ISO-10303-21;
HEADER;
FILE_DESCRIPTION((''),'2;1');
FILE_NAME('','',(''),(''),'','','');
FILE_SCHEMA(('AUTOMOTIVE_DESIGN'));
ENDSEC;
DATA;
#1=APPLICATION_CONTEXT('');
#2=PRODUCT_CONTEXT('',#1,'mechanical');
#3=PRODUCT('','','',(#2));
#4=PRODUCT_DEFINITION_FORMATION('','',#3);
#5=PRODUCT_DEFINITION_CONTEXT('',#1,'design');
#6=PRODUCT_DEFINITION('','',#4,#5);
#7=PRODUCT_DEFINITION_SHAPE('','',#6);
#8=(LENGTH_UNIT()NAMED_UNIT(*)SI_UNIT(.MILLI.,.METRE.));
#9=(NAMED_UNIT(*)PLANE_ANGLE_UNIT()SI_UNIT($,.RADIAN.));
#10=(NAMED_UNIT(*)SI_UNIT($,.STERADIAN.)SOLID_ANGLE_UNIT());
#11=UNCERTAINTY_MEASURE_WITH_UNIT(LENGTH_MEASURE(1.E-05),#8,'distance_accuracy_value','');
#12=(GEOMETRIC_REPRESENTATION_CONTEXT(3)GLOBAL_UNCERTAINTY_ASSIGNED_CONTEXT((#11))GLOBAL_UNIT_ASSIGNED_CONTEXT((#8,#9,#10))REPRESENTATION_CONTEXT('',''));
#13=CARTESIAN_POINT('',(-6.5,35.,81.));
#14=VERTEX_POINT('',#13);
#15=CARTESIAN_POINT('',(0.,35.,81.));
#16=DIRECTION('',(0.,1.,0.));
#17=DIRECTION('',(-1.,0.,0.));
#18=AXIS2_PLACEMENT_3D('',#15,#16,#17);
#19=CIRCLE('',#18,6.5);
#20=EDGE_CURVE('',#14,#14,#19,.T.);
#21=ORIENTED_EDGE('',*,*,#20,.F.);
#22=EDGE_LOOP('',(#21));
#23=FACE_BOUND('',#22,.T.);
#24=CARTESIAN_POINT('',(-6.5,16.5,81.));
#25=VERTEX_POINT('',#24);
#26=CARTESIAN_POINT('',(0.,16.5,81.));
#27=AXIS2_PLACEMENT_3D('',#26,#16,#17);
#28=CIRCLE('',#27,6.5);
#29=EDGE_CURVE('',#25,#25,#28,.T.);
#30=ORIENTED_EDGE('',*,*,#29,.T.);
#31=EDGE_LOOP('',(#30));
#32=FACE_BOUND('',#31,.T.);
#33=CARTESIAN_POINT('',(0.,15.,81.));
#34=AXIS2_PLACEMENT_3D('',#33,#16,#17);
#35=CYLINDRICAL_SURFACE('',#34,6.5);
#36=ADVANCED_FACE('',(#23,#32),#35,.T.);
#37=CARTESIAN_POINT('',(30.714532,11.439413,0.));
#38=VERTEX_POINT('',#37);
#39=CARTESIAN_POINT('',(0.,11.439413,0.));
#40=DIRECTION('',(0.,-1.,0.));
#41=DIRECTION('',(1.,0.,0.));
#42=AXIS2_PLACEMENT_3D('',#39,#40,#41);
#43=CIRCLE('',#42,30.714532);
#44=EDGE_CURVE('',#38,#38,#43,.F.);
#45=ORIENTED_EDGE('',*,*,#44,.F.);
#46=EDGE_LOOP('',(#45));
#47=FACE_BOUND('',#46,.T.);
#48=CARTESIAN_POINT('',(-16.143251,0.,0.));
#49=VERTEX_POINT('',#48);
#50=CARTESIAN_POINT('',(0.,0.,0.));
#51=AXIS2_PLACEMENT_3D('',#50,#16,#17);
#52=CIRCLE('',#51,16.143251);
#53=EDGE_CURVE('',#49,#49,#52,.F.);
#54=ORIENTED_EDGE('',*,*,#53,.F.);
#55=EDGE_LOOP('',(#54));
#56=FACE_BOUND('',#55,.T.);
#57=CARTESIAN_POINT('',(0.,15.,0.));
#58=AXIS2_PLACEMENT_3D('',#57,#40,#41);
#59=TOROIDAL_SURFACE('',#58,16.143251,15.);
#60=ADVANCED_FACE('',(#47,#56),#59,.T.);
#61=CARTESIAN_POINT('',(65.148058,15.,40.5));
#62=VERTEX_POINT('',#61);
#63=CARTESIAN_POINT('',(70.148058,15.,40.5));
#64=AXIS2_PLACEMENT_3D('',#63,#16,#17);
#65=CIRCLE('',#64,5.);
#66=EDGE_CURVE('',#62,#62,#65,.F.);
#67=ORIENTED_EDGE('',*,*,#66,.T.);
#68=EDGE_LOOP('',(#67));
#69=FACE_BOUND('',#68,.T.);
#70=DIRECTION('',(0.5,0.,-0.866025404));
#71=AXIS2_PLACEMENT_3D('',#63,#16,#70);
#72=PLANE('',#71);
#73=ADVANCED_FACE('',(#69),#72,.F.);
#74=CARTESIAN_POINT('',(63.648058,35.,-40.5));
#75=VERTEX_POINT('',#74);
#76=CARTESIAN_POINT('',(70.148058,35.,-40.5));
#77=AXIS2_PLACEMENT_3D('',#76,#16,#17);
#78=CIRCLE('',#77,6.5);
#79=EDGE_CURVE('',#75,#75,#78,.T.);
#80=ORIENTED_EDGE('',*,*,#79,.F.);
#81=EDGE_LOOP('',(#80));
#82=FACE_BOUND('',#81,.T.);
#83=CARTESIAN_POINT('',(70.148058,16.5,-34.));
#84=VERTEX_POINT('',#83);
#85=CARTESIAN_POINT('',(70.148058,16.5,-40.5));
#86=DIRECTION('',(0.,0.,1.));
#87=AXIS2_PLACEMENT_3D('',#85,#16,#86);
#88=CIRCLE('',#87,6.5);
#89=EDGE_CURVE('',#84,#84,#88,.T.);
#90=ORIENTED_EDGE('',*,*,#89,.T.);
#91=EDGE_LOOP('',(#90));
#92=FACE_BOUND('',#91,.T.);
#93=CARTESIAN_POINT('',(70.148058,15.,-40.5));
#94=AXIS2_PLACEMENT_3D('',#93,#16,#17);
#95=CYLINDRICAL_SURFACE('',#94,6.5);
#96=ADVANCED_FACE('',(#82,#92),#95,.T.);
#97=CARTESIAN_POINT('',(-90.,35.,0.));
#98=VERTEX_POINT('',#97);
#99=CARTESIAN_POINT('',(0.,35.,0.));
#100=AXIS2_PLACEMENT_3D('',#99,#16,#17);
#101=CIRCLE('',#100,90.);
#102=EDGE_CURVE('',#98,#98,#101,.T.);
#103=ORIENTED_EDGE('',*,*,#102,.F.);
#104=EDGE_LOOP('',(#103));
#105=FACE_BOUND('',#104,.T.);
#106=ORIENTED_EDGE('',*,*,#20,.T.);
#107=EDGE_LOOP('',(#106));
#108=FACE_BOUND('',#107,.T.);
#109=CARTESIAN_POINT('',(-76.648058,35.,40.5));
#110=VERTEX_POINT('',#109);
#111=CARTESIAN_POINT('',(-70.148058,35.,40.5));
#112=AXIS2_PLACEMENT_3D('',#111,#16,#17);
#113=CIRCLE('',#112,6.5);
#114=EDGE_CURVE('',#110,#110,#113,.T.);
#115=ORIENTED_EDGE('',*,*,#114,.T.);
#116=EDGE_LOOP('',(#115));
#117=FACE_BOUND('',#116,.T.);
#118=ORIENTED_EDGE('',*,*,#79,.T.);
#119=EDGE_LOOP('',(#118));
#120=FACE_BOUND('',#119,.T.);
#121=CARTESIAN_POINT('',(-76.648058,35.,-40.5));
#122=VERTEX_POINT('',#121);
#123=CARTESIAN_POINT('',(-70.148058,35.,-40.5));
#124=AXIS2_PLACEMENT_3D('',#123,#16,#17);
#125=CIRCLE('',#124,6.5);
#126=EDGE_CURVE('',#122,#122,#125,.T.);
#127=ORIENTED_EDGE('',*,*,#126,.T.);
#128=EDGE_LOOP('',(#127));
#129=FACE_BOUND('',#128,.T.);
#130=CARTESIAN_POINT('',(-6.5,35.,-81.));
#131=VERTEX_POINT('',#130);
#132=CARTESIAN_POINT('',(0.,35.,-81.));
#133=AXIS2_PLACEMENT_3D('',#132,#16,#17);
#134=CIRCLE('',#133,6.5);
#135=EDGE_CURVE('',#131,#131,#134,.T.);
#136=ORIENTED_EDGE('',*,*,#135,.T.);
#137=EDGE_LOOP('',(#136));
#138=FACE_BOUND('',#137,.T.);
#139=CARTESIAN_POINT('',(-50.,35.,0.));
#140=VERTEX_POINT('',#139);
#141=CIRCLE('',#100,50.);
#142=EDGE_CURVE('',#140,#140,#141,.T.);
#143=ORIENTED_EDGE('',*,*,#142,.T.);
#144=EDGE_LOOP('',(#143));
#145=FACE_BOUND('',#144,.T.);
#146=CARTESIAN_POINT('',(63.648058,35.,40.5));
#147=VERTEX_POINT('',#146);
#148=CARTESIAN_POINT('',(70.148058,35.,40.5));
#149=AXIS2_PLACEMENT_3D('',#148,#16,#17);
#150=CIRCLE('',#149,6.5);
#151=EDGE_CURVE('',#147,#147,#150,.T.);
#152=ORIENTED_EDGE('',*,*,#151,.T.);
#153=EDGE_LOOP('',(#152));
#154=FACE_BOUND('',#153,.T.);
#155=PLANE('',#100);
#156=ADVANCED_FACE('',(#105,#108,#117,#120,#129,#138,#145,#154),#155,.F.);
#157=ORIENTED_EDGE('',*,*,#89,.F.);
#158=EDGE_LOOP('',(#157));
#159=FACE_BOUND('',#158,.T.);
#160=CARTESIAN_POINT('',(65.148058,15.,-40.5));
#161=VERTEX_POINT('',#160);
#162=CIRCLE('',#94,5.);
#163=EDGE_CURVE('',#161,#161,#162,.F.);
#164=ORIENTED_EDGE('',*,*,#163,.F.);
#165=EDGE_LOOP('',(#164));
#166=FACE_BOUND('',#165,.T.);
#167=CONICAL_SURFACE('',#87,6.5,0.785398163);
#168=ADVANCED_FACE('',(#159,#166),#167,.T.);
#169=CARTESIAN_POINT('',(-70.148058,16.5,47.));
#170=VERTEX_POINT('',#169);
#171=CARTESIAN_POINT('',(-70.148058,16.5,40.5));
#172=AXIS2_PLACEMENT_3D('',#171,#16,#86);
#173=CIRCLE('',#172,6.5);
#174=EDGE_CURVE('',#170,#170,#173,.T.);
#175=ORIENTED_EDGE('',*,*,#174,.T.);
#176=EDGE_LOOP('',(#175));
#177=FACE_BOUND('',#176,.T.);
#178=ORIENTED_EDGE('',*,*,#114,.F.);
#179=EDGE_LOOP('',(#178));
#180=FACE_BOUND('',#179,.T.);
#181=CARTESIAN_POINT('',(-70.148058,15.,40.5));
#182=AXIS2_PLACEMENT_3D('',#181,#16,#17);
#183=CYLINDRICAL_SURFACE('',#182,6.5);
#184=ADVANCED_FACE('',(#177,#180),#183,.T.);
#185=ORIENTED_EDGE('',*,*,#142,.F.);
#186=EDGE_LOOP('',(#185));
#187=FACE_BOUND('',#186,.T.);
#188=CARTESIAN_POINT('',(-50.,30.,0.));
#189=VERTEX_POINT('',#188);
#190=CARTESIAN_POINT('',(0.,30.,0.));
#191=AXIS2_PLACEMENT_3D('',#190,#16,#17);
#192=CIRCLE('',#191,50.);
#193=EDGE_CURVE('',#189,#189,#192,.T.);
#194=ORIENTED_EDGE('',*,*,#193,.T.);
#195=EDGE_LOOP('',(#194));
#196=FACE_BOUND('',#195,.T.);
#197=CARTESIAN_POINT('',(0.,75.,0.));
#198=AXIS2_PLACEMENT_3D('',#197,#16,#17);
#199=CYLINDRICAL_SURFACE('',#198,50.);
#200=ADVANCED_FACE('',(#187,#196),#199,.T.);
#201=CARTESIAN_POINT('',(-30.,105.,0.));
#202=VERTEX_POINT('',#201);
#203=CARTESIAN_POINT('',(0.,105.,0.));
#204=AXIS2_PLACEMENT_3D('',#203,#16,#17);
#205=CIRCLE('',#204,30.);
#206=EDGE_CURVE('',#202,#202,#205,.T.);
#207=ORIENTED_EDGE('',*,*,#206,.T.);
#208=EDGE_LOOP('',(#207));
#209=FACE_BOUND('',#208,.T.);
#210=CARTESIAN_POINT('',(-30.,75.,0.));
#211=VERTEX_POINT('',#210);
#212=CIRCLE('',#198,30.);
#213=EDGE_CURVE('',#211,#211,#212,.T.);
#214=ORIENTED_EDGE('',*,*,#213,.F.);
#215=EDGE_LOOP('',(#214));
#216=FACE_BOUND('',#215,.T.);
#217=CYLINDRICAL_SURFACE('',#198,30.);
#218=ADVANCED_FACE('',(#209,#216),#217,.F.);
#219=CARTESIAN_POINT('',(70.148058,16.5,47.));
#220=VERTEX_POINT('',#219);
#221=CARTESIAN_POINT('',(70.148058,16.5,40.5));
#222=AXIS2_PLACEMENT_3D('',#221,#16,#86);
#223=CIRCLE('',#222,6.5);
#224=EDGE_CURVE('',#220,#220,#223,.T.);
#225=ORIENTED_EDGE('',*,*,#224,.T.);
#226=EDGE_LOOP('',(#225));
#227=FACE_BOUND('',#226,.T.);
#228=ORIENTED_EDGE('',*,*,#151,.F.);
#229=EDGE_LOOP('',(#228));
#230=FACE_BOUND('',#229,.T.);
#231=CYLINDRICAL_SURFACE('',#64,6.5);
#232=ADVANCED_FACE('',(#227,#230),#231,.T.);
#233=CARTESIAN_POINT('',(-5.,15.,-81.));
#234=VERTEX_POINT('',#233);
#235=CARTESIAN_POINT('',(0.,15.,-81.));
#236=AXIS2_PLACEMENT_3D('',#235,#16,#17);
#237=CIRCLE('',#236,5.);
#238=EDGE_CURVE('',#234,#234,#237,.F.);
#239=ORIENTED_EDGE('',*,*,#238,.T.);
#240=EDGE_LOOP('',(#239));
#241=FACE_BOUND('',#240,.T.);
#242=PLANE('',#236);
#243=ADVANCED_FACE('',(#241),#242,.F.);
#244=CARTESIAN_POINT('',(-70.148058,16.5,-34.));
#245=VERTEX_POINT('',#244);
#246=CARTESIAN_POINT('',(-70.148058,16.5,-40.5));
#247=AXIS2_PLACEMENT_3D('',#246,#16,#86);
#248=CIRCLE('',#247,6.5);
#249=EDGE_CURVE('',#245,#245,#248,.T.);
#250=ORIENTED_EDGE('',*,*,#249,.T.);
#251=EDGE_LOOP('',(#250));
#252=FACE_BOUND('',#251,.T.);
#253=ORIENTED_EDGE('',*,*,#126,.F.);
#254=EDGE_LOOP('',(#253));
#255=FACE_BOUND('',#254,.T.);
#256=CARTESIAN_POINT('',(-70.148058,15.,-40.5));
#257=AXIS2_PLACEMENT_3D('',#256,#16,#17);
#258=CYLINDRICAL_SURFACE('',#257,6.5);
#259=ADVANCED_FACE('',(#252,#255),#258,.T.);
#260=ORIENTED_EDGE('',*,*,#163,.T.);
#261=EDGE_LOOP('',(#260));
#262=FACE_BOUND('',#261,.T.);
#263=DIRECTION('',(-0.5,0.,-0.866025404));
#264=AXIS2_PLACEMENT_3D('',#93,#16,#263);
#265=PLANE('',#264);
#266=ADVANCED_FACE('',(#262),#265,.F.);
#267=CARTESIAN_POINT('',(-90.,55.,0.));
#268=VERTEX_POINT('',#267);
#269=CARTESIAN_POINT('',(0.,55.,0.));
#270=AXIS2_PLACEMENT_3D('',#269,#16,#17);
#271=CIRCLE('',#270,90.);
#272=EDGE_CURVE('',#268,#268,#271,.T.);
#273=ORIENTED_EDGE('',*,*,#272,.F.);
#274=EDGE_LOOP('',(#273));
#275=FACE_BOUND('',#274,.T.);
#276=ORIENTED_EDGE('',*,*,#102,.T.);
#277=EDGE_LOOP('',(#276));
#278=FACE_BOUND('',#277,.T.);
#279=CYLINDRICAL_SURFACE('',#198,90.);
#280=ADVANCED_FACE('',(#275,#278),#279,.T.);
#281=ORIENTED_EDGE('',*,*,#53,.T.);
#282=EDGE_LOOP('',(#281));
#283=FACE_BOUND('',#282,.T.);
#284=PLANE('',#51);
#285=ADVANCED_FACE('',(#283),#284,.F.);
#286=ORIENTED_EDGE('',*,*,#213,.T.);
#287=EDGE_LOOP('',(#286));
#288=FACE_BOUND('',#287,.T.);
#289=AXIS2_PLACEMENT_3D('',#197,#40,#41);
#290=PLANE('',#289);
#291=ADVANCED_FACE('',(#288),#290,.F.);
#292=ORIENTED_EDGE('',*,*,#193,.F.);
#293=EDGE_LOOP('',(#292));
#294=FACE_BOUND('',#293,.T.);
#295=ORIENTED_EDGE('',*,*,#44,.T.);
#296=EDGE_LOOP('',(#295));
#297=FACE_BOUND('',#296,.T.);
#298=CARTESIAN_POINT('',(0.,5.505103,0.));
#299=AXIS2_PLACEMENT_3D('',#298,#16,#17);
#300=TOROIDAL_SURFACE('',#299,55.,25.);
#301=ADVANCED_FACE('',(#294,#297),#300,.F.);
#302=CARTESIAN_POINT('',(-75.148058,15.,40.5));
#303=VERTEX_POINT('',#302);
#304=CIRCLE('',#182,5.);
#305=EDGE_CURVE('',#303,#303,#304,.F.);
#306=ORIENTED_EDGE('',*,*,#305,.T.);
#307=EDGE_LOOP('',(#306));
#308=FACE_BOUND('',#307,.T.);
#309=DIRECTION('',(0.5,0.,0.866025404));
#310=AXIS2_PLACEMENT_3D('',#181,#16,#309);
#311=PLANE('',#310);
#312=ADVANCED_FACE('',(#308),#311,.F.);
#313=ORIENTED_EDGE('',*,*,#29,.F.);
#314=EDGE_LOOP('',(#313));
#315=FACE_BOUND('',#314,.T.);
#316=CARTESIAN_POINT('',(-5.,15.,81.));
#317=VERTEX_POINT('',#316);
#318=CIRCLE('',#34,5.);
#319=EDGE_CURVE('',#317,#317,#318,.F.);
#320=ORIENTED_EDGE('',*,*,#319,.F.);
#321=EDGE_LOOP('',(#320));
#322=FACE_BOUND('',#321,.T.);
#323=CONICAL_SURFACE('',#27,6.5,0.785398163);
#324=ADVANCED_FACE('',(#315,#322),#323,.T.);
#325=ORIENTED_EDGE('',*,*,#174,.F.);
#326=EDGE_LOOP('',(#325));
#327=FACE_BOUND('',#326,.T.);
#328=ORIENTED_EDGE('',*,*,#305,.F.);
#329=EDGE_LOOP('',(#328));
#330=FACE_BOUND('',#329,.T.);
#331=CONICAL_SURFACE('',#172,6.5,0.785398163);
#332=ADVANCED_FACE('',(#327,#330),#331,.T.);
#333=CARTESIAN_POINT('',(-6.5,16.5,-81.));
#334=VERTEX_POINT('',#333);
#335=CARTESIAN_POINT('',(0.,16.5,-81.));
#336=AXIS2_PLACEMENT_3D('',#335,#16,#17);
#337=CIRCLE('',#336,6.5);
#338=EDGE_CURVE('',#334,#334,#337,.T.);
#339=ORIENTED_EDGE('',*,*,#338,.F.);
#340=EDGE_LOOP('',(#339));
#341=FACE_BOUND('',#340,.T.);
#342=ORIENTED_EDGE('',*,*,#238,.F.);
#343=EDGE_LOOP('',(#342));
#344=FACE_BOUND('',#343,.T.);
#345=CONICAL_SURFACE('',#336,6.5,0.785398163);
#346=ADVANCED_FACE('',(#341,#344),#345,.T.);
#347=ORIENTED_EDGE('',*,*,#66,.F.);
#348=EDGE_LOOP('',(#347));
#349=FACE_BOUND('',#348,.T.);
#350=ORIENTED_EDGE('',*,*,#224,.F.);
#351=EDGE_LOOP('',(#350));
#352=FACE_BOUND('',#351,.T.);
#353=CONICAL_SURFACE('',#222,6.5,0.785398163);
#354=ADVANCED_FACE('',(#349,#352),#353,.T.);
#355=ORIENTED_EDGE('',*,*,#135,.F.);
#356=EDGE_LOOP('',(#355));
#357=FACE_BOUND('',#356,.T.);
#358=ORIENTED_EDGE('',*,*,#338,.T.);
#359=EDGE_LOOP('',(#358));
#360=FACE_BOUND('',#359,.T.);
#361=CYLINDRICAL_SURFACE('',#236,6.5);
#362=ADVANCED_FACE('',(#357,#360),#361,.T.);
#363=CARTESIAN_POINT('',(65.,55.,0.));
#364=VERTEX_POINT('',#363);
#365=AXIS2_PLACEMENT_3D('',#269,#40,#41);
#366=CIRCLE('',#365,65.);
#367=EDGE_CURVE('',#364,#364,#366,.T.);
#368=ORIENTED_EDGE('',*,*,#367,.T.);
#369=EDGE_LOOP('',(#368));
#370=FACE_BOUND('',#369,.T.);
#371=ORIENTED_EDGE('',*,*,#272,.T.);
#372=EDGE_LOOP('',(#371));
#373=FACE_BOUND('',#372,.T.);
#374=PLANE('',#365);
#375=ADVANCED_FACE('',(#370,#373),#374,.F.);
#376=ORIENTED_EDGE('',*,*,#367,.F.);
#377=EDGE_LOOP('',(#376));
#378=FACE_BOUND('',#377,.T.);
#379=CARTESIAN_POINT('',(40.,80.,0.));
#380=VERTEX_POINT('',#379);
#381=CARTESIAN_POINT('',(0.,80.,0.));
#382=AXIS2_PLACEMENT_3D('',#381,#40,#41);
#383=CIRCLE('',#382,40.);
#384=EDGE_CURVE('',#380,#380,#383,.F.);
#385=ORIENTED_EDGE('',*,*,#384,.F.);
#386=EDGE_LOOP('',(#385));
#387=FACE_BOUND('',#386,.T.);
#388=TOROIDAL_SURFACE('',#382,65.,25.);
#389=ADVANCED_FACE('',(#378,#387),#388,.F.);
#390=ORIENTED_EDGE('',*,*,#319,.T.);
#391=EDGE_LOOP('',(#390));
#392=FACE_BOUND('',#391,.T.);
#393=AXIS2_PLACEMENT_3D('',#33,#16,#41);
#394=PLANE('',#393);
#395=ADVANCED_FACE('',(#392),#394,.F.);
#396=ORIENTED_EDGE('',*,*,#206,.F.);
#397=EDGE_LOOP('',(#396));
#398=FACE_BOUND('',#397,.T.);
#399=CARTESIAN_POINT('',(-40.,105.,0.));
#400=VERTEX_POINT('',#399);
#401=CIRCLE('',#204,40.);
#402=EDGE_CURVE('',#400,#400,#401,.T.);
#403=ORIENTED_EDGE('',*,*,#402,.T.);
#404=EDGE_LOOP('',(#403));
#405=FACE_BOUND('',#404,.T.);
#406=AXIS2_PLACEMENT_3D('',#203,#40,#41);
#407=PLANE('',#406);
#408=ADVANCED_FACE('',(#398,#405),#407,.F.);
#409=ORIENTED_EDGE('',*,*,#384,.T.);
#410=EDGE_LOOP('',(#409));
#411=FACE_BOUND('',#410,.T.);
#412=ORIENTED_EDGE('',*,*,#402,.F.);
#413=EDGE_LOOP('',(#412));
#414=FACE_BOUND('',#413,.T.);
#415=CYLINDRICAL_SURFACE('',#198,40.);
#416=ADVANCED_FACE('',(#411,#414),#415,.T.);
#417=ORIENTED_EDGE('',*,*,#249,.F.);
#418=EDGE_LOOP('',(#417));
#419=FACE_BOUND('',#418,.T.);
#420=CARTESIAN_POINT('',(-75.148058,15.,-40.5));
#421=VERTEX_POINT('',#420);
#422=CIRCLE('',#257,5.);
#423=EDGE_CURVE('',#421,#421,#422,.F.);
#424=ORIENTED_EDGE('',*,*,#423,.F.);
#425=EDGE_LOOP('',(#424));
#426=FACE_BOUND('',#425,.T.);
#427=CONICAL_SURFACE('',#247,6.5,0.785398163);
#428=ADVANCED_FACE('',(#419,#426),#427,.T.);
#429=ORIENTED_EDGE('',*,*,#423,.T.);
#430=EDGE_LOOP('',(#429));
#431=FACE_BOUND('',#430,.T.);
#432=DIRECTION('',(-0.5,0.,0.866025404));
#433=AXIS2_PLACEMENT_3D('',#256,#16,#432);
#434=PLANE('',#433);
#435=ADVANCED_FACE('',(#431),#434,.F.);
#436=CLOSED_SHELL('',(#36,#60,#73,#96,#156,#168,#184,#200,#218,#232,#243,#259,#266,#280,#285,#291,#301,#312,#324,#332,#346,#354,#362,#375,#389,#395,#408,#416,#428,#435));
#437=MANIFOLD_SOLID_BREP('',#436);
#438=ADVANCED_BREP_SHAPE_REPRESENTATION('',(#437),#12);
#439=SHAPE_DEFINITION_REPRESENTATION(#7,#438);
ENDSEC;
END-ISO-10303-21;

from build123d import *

# Parameters (mm, degrees)
SKETCH2_R           = 6.5000000000000036
BOSS_EXTRUDE2_DEPTH = 40
CIRPATTERN15_COUNT  = 6
CHAMFER1_SIZE       = 1.5
FILLET1_R           = 25
FILLET2_R           = 15


with BuildPart() as part:
    # Sketch1 → Revolve1 (revolve)
    with BuildSketch(Plane.XY):
        Polygon((2.8e-16, 75), (0, 0), (-30, 0), (-30, 29.999999999999996), (-50.00000000000002, 29.999999999999993), (-50.00000000000002, 34.99999999999999), (-90.00000000000003, 34.99999999999999), (-90.00000000000003, 54.99999999999999), (-40.000000000000014, 54.99999999999999), (-40, 105), (-30.000000000000004, 105), (-30, 75), align=None)
    revolve(axis=Axis((2.8e-16, 75, 0), (0, -1, 0)))

    # Sketch2 → Boss-Extrude2 (add)
    with BuildSketch(Plane(origin=(2.1e-16, 54.99999999999999, 0), x_dir=(1, 0, 0), z_dir=(0, 1, 0))):
        with Locations(Location((0, 81, 0), (0, 0, 180))):
            Circle(SKETCH2_R)
    boss_extrude2 = extrude(amount=-BOSS_EXTRUDE2_DEPTH)

    # CirPattern15: Boss-Extrude2 ×6 about axis
    cirpattern15_axis = Axis((9.552e-14, 0, 1.87e-15), (0, 1, 0))
    for i in range(1, CIRPATTERN15_COUNT):
        add(boss_extrude2.rotate(cirpattern15_axis, i * 360 / CIRPATTERN15_COUNT))

    # Chamfer1
    chamfer1_edges = [part.edges().sort_by_distance(p)[0] for p in [
        (6.5000000000000036, 14.999999999999993, -81),
        (73.39805770653957, 14.999999999999993, -34.870834875401236),
        (66.89805770653965, 14.999999999999993, 46.129165124598806),
        (-6.499999999999822, 14.999999999999993, 81),
        (-73.39805770653939, 14.999999999999993, 34.87083487540121),
        (-66.89805770653949, 14.999999999999993, -46.12916512459878),
    ]]
    chamfer(chamfer1_edges, length=CHAMFER1_SIZE)

    # Fillet1
    # the kernel refuses this fillet: 25 mm, written as the material it adds along each edge
    with BuildSketch(Plane(origin=(1.1e-16, 30, 0), x_dir=(-1, 0, 0), z_dir=(0, 0, 1))) as fillet1_piece_1:
        with BuildLine():
            CenterArc((55, 24.494897427831788), FILLET1_R, 180, 78.46304096718455)
            Line((30, 24.494897427831788), (29.5, 24.494897427831788))
            Line((29.5, 24.494897427831788), (29.5, 0))
            Line((29.5, 0), (30, -0.5))
            ThreePointArc((30, -0.5), (40.000000000000014, -0.5), (49.90000000000002, -0.4898979485566315))
            Line((49.90000000000002, -0.4898979485566315), (50.00000000000002, 3.55e-15))
        make_face()
    revolve(axis=Axis((1.1e-16, 30, 0), (0, -1, 0)))
    with BuildSketch(Plane(origin=(2.1e-16, 54.99999999999999, 0), x_dir=(-1, 0, 0), z_dir=(0, 0, 1))) as fillet1_piece_2:
        with BuildLine():
            CenterArc((40.000000000000014 + FILLET1_R, -FILLET1_R), FILLET1_R, 90, 89.99999999999997)
            Line((40.000000000000014, -FILLET1_R), (40.000000000000014 - FILLET1_R * 0.02, -FILLET1_R))
            Line((40.000000000000014 - FILLET1_R * 0.02, -FILLET1_R), (40.000000000000014 - FILLET1_R * 0.02, FILLET1_R * 0.02))
            Line((40.000000000000014 - FILLET1_R * 0.02, FILLET1_R * 0.02), (40.000000000000014 + FILLET1_R, FILLET1_R * 0.02))
            Line((40.000000000000014 + FILLET1_R, FILLET1_R * 0.02), (40.000000000000014 + FILLET1_R, -7.11e-15))
        make_face()
    revolve(axis=Axis((2.1e-16, 54.99999999999999, 0), (0, -1, 0)))

    # Fillet2
    fillet2_edges = [part.edges().sort_by_distance(p)[0] for p in [
        (30, -1.1e-16, -1.7e-14),
    ]]
    fillet(fillet2_edges, radius=FILLET2_R)


solid = part.part
